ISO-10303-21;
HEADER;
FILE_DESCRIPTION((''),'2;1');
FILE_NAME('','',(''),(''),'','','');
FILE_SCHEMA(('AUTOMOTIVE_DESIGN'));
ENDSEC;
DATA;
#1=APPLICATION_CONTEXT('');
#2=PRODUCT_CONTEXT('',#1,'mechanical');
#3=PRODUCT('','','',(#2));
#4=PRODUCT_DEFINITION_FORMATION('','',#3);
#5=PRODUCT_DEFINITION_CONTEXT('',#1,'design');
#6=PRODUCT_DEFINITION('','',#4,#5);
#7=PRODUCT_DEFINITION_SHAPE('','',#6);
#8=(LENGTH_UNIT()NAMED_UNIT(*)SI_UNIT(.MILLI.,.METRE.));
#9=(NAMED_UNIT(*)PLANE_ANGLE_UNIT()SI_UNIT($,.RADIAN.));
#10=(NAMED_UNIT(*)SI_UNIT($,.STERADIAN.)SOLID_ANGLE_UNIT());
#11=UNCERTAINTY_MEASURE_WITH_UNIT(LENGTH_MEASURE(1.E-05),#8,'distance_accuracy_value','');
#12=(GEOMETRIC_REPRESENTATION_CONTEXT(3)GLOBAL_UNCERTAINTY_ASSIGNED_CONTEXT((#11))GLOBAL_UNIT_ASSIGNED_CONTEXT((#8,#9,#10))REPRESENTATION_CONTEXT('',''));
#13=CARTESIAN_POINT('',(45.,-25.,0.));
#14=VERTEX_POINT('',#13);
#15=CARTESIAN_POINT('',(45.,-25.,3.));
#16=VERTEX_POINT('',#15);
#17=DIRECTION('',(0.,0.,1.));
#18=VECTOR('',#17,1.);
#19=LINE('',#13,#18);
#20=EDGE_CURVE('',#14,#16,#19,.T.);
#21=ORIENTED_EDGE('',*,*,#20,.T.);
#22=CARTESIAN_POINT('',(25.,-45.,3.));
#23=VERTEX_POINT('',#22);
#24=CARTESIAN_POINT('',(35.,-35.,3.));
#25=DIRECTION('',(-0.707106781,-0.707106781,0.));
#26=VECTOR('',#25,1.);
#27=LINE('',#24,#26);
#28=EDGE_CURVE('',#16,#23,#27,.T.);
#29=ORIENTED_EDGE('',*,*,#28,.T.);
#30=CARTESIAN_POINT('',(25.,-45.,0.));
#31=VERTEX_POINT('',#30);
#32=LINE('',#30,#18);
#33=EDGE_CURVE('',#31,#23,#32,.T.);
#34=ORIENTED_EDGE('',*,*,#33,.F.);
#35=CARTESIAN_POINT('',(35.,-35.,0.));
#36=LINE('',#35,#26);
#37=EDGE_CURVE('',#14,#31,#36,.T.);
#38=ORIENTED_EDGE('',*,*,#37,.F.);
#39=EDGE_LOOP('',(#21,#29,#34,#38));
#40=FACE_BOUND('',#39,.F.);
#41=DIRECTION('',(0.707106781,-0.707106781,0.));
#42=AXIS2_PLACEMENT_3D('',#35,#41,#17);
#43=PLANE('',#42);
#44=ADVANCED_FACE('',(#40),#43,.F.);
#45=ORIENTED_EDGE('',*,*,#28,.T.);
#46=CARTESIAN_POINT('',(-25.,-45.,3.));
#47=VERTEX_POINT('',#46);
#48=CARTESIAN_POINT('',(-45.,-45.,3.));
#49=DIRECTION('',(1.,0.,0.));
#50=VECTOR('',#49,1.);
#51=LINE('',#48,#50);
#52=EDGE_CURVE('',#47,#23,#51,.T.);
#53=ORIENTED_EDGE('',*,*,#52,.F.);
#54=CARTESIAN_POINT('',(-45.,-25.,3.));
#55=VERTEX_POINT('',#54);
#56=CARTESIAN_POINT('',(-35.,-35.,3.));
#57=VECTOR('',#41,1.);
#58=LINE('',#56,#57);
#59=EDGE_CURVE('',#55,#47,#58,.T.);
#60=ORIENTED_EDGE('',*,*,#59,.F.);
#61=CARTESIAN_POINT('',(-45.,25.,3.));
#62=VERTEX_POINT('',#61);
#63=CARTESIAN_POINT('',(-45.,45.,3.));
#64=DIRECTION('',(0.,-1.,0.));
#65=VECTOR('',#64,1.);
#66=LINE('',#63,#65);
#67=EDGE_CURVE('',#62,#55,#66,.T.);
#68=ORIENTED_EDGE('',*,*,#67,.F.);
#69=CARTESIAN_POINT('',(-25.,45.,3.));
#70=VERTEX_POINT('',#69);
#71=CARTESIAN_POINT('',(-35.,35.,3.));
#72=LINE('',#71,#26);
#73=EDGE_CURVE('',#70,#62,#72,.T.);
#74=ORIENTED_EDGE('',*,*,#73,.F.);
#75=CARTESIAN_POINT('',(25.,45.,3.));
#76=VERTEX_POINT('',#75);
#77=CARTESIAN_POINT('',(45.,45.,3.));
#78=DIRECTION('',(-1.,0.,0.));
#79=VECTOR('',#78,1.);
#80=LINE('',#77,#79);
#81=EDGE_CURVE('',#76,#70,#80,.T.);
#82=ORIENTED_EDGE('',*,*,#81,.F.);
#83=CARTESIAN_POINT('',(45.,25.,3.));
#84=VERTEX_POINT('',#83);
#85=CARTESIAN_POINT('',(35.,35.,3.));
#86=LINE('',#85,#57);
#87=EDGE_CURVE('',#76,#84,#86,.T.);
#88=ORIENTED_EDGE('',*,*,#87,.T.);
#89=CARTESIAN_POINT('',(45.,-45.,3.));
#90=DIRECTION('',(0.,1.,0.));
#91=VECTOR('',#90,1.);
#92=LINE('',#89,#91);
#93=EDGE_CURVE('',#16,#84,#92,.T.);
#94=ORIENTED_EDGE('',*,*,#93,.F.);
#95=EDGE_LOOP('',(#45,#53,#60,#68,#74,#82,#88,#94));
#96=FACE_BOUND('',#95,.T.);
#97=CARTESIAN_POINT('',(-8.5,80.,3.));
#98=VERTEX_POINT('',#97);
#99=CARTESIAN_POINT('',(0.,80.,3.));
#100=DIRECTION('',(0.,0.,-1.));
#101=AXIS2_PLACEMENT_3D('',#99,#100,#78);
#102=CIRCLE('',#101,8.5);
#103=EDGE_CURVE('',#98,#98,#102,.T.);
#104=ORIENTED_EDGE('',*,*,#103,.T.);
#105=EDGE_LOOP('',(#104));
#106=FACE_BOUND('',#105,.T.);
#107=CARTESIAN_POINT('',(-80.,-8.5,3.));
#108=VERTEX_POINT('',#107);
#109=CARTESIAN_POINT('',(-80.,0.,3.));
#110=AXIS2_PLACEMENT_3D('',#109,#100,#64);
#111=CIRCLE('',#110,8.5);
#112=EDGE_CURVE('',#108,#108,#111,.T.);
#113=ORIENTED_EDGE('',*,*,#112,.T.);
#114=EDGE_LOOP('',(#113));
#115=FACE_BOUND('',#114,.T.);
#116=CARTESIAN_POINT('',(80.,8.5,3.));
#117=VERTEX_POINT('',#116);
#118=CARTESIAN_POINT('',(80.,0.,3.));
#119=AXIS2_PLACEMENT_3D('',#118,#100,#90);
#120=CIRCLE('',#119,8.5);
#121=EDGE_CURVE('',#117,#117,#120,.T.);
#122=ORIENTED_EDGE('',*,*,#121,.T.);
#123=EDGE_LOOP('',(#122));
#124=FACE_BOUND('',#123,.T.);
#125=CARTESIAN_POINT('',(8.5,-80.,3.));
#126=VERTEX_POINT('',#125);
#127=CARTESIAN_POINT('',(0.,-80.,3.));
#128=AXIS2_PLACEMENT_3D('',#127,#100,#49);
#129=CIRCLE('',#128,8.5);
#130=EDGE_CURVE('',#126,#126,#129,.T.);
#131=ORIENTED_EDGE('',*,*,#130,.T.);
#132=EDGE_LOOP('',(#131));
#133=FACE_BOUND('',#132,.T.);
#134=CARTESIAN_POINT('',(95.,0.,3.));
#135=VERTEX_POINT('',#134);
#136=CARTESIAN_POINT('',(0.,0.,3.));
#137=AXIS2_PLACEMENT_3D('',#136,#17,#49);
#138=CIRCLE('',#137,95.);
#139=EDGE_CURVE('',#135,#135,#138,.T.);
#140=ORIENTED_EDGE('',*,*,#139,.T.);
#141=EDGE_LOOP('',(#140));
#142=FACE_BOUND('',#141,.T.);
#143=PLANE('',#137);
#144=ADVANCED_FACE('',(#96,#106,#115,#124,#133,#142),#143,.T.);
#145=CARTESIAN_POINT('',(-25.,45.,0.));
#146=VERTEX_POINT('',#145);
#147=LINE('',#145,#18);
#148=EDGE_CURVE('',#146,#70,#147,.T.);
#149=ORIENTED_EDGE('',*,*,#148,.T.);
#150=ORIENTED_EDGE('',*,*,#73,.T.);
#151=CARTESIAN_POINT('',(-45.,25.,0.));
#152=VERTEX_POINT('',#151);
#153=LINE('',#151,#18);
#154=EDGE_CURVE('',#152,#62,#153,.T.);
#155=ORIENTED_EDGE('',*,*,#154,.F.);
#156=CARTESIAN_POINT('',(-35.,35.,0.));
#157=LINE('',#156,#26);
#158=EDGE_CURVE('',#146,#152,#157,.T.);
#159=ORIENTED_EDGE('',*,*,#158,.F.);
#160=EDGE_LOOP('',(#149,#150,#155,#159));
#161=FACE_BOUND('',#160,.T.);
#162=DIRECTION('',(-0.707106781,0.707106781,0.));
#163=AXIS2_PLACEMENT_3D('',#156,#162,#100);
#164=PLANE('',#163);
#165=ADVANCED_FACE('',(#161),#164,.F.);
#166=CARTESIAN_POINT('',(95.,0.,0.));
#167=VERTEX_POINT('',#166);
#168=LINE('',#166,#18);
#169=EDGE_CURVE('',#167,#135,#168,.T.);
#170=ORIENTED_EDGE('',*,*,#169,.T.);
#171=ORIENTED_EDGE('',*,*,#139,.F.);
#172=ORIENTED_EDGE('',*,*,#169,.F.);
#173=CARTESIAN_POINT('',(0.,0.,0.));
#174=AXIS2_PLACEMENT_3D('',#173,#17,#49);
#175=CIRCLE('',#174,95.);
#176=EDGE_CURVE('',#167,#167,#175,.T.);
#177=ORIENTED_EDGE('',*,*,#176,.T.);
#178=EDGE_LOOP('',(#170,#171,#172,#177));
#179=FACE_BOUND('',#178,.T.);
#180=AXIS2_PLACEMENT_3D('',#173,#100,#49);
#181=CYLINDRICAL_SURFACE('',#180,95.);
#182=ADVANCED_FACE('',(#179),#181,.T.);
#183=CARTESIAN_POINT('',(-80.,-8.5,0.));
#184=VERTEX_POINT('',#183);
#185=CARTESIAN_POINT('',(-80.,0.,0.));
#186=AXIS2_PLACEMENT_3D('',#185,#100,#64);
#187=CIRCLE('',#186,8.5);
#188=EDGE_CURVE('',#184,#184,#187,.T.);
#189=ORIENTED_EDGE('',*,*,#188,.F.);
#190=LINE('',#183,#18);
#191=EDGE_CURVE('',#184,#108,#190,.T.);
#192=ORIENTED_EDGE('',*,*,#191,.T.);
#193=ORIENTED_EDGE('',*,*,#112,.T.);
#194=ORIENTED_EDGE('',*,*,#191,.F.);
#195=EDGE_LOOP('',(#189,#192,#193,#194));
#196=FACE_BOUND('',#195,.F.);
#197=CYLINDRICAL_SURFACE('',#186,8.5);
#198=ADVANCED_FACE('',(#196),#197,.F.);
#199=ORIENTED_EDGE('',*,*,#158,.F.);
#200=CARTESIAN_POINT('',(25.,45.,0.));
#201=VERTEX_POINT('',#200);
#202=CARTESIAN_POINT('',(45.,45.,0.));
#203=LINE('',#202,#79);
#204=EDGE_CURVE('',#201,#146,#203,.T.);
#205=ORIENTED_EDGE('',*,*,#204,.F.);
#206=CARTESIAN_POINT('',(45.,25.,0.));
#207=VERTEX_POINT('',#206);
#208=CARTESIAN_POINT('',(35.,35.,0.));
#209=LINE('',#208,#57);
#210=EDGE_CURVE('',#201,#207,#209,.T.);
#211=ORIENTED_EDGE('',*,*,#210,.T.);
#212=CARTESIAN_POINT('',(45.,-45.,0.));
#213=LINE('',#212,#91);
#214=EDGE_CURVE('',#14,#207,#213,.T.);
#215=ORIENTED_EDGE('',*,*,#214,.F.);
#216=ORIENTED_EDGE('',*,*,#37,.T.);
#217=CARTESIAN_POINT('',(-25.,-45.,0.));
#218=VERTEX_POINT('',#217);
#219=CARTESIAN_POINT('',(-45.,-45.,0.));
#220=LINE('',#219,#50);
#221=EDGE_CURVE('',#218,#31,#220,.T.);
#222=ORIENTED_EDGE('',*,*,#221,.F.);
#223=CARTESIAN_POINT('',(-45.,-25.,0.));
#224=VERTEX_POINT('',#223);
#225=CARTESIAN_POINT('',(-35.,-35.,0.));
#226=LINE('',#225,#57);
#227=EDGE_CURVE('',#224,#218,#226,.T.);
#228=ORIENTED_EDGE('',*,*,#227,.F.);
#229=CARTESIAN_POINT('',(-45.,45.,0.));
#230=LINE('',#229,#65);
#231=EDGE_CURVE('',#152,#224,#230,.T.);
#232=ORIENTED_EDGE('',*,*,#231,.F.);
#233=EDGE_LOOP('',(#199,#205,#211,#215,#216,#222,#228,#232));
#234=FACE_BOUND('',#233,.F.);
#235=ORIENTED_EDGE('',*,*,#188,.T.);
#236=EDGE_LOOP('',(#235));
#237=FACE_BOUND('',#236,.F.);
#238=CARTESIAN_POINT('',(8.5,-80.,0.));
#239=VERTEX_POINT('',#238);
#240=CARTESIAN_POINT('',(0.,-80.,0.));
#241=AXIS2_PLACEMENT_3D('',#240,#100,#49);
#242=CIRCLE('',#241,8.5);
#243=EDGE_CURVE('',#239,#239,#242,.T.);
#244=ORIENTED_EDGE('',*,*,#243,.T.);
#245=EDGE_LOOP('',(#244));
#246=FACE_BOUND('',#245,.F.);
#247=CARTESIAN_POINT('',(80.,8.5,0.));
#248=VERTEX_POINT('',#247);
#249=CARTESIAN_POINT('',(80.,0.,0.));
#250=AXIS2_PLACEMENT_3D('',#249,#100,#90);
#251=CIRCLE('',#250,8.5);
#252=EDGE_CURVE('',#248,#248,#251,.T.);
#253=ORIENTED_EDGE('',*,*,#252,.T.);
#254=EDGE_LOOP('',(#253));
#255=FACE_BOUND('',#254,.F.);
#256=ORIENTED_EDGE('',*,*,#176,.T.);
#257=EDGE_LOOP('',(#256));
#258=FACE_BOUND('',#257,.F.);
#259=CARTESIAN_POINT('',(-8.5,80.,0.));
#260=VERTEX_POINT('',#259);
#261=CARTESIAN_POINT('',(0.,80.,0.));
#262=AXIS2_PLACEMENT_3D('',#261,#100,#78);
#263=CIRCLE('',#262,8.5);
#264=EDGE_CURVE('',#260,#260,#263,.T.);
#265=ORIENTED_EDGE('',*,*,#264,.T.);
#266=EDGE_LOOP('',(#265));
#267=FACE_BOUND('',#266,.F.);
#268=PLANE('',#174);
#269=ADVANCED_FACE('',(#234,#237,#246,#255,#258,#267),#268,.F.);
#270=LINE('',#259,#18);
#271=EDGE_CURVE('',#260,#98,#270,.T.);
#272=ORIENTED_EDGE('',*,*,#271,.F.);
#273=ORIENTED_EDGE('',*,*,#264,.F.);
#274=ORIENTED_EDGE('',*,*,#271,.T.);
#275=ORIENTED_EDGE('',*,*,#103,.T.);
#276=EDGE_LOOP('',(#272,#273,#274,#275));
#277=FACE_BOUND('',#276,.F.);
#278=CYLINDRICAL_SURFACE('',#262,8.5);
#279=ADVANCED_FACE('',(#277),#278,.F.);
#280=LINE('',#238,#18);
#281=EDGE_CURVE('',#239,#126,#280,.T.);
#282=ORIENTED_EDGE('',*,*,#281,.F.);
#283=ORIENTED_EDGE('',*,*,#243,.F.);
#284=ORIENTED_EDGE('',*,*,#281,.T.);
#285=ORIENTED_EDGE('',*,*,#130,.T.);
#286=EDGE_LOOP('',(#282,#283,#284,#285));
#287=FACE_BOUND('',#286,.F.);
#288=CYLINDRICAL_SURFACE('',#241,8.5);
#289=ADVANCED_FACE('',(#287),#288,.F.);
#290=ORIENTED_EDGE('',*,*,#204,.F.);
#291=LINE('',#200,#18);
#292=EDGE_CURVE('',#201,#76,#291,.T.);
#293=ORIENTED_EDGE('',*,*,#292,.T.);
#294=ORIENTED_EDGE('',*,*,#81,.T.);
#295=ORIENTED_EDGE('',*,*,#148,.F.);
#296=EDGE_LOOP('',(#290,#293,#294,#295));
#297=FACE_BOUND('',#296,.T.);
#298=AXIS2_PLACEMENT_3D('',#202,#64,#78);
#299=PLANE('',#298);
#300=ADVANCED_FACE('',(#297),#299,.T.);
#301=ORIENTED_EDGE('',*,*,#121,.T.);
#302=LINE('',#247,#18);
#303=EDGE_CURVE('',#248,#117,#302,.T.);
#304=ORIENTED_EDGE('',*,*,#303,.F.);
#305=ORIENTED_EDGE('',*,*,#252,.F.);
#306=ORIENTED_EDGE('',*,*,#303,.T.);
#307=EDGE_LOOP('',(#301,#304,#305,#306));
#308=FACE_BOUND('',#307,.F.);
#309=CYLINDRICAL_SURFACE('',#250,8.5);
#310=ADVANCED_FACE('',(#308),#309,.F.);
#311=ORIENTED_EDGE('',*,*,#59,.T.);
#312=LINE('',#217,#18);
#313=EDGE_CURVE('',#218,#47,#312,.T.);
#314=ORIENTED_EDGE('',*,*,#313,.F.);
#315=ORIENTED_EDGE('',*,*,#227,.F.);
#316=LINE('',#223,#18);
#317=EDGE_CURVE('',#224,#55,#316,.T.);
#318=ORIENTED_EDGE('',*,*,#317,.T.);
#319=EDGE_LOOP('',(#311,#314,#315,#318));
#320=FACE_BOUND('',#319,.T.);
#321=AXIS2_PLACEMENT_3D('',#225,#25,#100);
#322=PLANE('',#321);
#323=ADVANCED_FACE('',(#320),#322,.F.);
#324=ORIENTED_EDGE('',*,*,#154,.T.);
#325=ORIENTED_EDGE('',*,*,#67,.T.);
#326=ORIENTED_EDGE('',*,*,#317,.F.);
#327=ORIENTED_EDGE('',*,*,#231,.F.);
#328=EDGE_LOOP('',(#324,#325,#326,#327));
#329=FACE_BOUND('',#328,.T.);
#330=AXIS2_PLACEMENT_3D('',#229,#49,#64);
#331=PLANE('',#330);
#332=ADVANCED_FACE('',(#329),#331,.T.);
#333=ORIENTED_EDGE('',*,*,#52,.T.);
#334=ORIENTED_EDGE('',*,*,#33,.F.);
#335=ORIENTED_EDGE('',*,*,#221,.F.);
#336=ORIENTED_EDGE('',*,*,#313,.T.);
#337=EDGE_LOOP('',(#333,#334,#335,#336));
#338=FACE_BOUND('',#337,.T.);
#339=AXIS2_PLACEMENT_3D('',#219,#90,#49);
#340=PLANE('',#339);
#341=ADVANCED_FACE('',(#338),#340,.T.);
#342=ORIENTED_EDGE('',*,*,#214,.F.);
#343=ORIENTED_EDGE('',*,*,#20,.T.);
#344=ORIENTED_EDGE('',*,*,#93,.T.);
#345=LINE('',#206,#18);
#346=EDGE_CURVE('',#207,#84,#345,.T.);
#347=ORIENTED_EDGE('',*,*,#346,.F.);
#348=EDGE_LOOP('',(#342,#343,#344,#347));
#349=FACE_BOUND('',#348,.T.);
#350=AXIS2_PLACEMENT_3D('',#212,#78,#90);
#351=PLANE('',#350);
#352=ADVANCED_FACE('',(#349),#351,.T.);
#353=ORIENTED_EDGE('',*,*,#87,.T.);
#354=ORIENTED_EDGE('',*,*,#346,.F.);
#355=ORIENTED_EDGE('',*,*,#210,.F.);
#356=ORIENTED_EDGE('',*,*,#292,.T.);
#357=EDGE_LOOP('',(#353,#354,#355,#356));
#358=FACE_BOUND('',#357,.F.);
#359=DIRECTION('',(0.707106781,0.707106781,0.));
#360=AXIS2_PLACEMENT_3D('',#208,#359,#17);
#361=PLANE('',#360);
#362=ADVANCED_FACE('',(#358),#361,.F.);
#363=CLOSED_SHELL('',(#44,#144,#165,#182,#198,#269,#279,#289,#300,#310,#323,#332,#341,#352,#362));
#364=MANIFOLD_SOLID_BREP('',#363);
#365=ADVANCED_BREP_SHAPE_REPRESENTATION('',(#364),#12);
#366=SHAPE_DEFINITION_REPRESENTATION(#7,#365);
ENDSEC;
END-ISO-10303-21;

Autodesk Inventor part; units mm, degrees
ref_plane "YZ Plane" through (0, 0, 0) normal (1, 0, 0) x (0, 1, 0)
ref_plane "XZ Plane" through (0, 0, 0) normal (0, 1, 0) x (-1, 0, 0)
ref_plane "XY Plane" through (0, 0, 0) normal (0, 0, 1) x (1, 0, 0)
sketch "Sketch1" plane through (0, 0, 0) normal (0, 0, 1) x (1, 0, 0)
  circle A0 centre (0, 0) radius 95
  line L0 (45, 45) -> (-45, 45)
  line L1 (-45, 45) -> (-45, -45)
  line L2 (-45, -45) -> (45, -45)
  line L3 (45, -45) -> (45, 45)
  line L4 (45, 45) -> (-45, -45) construction
  line L5 (-45, 45) -> (45, -45) construction
  dimension "d157" = 190
  dimension "d158" = 90
  dimension "d159" = 90
extrude "Plate5" add sketch "Sketch1" along normal blind 3
sketch "Sketch7" plane through (0, 0, 0) normal (0, 0, -1) x (-1, 0, 0)
  circle A0 centre (0, 80) radius 8.5
  point P0 (0, 0)
  dimension "d160" = 17
  dimension "d161" = 80
extrude "Cut1" cut sketch "Sketch7" against normal blind 3
pattern_circular "Circular Pattern1" count 4 over 360 about axis through (0, 0, -10) along (0, 0, 1) of "Cut1"
chamfer "Corner Chamfer2" distance 20 angle 45 4 edges at (-45, -45, 1.5) (45, -45, 1.5) (-45, 45, 1.5) (45, 45, 1.5)
properties part number "PNS 1651 FDS MAIN  FLANGE" material "Stainless Steel"
